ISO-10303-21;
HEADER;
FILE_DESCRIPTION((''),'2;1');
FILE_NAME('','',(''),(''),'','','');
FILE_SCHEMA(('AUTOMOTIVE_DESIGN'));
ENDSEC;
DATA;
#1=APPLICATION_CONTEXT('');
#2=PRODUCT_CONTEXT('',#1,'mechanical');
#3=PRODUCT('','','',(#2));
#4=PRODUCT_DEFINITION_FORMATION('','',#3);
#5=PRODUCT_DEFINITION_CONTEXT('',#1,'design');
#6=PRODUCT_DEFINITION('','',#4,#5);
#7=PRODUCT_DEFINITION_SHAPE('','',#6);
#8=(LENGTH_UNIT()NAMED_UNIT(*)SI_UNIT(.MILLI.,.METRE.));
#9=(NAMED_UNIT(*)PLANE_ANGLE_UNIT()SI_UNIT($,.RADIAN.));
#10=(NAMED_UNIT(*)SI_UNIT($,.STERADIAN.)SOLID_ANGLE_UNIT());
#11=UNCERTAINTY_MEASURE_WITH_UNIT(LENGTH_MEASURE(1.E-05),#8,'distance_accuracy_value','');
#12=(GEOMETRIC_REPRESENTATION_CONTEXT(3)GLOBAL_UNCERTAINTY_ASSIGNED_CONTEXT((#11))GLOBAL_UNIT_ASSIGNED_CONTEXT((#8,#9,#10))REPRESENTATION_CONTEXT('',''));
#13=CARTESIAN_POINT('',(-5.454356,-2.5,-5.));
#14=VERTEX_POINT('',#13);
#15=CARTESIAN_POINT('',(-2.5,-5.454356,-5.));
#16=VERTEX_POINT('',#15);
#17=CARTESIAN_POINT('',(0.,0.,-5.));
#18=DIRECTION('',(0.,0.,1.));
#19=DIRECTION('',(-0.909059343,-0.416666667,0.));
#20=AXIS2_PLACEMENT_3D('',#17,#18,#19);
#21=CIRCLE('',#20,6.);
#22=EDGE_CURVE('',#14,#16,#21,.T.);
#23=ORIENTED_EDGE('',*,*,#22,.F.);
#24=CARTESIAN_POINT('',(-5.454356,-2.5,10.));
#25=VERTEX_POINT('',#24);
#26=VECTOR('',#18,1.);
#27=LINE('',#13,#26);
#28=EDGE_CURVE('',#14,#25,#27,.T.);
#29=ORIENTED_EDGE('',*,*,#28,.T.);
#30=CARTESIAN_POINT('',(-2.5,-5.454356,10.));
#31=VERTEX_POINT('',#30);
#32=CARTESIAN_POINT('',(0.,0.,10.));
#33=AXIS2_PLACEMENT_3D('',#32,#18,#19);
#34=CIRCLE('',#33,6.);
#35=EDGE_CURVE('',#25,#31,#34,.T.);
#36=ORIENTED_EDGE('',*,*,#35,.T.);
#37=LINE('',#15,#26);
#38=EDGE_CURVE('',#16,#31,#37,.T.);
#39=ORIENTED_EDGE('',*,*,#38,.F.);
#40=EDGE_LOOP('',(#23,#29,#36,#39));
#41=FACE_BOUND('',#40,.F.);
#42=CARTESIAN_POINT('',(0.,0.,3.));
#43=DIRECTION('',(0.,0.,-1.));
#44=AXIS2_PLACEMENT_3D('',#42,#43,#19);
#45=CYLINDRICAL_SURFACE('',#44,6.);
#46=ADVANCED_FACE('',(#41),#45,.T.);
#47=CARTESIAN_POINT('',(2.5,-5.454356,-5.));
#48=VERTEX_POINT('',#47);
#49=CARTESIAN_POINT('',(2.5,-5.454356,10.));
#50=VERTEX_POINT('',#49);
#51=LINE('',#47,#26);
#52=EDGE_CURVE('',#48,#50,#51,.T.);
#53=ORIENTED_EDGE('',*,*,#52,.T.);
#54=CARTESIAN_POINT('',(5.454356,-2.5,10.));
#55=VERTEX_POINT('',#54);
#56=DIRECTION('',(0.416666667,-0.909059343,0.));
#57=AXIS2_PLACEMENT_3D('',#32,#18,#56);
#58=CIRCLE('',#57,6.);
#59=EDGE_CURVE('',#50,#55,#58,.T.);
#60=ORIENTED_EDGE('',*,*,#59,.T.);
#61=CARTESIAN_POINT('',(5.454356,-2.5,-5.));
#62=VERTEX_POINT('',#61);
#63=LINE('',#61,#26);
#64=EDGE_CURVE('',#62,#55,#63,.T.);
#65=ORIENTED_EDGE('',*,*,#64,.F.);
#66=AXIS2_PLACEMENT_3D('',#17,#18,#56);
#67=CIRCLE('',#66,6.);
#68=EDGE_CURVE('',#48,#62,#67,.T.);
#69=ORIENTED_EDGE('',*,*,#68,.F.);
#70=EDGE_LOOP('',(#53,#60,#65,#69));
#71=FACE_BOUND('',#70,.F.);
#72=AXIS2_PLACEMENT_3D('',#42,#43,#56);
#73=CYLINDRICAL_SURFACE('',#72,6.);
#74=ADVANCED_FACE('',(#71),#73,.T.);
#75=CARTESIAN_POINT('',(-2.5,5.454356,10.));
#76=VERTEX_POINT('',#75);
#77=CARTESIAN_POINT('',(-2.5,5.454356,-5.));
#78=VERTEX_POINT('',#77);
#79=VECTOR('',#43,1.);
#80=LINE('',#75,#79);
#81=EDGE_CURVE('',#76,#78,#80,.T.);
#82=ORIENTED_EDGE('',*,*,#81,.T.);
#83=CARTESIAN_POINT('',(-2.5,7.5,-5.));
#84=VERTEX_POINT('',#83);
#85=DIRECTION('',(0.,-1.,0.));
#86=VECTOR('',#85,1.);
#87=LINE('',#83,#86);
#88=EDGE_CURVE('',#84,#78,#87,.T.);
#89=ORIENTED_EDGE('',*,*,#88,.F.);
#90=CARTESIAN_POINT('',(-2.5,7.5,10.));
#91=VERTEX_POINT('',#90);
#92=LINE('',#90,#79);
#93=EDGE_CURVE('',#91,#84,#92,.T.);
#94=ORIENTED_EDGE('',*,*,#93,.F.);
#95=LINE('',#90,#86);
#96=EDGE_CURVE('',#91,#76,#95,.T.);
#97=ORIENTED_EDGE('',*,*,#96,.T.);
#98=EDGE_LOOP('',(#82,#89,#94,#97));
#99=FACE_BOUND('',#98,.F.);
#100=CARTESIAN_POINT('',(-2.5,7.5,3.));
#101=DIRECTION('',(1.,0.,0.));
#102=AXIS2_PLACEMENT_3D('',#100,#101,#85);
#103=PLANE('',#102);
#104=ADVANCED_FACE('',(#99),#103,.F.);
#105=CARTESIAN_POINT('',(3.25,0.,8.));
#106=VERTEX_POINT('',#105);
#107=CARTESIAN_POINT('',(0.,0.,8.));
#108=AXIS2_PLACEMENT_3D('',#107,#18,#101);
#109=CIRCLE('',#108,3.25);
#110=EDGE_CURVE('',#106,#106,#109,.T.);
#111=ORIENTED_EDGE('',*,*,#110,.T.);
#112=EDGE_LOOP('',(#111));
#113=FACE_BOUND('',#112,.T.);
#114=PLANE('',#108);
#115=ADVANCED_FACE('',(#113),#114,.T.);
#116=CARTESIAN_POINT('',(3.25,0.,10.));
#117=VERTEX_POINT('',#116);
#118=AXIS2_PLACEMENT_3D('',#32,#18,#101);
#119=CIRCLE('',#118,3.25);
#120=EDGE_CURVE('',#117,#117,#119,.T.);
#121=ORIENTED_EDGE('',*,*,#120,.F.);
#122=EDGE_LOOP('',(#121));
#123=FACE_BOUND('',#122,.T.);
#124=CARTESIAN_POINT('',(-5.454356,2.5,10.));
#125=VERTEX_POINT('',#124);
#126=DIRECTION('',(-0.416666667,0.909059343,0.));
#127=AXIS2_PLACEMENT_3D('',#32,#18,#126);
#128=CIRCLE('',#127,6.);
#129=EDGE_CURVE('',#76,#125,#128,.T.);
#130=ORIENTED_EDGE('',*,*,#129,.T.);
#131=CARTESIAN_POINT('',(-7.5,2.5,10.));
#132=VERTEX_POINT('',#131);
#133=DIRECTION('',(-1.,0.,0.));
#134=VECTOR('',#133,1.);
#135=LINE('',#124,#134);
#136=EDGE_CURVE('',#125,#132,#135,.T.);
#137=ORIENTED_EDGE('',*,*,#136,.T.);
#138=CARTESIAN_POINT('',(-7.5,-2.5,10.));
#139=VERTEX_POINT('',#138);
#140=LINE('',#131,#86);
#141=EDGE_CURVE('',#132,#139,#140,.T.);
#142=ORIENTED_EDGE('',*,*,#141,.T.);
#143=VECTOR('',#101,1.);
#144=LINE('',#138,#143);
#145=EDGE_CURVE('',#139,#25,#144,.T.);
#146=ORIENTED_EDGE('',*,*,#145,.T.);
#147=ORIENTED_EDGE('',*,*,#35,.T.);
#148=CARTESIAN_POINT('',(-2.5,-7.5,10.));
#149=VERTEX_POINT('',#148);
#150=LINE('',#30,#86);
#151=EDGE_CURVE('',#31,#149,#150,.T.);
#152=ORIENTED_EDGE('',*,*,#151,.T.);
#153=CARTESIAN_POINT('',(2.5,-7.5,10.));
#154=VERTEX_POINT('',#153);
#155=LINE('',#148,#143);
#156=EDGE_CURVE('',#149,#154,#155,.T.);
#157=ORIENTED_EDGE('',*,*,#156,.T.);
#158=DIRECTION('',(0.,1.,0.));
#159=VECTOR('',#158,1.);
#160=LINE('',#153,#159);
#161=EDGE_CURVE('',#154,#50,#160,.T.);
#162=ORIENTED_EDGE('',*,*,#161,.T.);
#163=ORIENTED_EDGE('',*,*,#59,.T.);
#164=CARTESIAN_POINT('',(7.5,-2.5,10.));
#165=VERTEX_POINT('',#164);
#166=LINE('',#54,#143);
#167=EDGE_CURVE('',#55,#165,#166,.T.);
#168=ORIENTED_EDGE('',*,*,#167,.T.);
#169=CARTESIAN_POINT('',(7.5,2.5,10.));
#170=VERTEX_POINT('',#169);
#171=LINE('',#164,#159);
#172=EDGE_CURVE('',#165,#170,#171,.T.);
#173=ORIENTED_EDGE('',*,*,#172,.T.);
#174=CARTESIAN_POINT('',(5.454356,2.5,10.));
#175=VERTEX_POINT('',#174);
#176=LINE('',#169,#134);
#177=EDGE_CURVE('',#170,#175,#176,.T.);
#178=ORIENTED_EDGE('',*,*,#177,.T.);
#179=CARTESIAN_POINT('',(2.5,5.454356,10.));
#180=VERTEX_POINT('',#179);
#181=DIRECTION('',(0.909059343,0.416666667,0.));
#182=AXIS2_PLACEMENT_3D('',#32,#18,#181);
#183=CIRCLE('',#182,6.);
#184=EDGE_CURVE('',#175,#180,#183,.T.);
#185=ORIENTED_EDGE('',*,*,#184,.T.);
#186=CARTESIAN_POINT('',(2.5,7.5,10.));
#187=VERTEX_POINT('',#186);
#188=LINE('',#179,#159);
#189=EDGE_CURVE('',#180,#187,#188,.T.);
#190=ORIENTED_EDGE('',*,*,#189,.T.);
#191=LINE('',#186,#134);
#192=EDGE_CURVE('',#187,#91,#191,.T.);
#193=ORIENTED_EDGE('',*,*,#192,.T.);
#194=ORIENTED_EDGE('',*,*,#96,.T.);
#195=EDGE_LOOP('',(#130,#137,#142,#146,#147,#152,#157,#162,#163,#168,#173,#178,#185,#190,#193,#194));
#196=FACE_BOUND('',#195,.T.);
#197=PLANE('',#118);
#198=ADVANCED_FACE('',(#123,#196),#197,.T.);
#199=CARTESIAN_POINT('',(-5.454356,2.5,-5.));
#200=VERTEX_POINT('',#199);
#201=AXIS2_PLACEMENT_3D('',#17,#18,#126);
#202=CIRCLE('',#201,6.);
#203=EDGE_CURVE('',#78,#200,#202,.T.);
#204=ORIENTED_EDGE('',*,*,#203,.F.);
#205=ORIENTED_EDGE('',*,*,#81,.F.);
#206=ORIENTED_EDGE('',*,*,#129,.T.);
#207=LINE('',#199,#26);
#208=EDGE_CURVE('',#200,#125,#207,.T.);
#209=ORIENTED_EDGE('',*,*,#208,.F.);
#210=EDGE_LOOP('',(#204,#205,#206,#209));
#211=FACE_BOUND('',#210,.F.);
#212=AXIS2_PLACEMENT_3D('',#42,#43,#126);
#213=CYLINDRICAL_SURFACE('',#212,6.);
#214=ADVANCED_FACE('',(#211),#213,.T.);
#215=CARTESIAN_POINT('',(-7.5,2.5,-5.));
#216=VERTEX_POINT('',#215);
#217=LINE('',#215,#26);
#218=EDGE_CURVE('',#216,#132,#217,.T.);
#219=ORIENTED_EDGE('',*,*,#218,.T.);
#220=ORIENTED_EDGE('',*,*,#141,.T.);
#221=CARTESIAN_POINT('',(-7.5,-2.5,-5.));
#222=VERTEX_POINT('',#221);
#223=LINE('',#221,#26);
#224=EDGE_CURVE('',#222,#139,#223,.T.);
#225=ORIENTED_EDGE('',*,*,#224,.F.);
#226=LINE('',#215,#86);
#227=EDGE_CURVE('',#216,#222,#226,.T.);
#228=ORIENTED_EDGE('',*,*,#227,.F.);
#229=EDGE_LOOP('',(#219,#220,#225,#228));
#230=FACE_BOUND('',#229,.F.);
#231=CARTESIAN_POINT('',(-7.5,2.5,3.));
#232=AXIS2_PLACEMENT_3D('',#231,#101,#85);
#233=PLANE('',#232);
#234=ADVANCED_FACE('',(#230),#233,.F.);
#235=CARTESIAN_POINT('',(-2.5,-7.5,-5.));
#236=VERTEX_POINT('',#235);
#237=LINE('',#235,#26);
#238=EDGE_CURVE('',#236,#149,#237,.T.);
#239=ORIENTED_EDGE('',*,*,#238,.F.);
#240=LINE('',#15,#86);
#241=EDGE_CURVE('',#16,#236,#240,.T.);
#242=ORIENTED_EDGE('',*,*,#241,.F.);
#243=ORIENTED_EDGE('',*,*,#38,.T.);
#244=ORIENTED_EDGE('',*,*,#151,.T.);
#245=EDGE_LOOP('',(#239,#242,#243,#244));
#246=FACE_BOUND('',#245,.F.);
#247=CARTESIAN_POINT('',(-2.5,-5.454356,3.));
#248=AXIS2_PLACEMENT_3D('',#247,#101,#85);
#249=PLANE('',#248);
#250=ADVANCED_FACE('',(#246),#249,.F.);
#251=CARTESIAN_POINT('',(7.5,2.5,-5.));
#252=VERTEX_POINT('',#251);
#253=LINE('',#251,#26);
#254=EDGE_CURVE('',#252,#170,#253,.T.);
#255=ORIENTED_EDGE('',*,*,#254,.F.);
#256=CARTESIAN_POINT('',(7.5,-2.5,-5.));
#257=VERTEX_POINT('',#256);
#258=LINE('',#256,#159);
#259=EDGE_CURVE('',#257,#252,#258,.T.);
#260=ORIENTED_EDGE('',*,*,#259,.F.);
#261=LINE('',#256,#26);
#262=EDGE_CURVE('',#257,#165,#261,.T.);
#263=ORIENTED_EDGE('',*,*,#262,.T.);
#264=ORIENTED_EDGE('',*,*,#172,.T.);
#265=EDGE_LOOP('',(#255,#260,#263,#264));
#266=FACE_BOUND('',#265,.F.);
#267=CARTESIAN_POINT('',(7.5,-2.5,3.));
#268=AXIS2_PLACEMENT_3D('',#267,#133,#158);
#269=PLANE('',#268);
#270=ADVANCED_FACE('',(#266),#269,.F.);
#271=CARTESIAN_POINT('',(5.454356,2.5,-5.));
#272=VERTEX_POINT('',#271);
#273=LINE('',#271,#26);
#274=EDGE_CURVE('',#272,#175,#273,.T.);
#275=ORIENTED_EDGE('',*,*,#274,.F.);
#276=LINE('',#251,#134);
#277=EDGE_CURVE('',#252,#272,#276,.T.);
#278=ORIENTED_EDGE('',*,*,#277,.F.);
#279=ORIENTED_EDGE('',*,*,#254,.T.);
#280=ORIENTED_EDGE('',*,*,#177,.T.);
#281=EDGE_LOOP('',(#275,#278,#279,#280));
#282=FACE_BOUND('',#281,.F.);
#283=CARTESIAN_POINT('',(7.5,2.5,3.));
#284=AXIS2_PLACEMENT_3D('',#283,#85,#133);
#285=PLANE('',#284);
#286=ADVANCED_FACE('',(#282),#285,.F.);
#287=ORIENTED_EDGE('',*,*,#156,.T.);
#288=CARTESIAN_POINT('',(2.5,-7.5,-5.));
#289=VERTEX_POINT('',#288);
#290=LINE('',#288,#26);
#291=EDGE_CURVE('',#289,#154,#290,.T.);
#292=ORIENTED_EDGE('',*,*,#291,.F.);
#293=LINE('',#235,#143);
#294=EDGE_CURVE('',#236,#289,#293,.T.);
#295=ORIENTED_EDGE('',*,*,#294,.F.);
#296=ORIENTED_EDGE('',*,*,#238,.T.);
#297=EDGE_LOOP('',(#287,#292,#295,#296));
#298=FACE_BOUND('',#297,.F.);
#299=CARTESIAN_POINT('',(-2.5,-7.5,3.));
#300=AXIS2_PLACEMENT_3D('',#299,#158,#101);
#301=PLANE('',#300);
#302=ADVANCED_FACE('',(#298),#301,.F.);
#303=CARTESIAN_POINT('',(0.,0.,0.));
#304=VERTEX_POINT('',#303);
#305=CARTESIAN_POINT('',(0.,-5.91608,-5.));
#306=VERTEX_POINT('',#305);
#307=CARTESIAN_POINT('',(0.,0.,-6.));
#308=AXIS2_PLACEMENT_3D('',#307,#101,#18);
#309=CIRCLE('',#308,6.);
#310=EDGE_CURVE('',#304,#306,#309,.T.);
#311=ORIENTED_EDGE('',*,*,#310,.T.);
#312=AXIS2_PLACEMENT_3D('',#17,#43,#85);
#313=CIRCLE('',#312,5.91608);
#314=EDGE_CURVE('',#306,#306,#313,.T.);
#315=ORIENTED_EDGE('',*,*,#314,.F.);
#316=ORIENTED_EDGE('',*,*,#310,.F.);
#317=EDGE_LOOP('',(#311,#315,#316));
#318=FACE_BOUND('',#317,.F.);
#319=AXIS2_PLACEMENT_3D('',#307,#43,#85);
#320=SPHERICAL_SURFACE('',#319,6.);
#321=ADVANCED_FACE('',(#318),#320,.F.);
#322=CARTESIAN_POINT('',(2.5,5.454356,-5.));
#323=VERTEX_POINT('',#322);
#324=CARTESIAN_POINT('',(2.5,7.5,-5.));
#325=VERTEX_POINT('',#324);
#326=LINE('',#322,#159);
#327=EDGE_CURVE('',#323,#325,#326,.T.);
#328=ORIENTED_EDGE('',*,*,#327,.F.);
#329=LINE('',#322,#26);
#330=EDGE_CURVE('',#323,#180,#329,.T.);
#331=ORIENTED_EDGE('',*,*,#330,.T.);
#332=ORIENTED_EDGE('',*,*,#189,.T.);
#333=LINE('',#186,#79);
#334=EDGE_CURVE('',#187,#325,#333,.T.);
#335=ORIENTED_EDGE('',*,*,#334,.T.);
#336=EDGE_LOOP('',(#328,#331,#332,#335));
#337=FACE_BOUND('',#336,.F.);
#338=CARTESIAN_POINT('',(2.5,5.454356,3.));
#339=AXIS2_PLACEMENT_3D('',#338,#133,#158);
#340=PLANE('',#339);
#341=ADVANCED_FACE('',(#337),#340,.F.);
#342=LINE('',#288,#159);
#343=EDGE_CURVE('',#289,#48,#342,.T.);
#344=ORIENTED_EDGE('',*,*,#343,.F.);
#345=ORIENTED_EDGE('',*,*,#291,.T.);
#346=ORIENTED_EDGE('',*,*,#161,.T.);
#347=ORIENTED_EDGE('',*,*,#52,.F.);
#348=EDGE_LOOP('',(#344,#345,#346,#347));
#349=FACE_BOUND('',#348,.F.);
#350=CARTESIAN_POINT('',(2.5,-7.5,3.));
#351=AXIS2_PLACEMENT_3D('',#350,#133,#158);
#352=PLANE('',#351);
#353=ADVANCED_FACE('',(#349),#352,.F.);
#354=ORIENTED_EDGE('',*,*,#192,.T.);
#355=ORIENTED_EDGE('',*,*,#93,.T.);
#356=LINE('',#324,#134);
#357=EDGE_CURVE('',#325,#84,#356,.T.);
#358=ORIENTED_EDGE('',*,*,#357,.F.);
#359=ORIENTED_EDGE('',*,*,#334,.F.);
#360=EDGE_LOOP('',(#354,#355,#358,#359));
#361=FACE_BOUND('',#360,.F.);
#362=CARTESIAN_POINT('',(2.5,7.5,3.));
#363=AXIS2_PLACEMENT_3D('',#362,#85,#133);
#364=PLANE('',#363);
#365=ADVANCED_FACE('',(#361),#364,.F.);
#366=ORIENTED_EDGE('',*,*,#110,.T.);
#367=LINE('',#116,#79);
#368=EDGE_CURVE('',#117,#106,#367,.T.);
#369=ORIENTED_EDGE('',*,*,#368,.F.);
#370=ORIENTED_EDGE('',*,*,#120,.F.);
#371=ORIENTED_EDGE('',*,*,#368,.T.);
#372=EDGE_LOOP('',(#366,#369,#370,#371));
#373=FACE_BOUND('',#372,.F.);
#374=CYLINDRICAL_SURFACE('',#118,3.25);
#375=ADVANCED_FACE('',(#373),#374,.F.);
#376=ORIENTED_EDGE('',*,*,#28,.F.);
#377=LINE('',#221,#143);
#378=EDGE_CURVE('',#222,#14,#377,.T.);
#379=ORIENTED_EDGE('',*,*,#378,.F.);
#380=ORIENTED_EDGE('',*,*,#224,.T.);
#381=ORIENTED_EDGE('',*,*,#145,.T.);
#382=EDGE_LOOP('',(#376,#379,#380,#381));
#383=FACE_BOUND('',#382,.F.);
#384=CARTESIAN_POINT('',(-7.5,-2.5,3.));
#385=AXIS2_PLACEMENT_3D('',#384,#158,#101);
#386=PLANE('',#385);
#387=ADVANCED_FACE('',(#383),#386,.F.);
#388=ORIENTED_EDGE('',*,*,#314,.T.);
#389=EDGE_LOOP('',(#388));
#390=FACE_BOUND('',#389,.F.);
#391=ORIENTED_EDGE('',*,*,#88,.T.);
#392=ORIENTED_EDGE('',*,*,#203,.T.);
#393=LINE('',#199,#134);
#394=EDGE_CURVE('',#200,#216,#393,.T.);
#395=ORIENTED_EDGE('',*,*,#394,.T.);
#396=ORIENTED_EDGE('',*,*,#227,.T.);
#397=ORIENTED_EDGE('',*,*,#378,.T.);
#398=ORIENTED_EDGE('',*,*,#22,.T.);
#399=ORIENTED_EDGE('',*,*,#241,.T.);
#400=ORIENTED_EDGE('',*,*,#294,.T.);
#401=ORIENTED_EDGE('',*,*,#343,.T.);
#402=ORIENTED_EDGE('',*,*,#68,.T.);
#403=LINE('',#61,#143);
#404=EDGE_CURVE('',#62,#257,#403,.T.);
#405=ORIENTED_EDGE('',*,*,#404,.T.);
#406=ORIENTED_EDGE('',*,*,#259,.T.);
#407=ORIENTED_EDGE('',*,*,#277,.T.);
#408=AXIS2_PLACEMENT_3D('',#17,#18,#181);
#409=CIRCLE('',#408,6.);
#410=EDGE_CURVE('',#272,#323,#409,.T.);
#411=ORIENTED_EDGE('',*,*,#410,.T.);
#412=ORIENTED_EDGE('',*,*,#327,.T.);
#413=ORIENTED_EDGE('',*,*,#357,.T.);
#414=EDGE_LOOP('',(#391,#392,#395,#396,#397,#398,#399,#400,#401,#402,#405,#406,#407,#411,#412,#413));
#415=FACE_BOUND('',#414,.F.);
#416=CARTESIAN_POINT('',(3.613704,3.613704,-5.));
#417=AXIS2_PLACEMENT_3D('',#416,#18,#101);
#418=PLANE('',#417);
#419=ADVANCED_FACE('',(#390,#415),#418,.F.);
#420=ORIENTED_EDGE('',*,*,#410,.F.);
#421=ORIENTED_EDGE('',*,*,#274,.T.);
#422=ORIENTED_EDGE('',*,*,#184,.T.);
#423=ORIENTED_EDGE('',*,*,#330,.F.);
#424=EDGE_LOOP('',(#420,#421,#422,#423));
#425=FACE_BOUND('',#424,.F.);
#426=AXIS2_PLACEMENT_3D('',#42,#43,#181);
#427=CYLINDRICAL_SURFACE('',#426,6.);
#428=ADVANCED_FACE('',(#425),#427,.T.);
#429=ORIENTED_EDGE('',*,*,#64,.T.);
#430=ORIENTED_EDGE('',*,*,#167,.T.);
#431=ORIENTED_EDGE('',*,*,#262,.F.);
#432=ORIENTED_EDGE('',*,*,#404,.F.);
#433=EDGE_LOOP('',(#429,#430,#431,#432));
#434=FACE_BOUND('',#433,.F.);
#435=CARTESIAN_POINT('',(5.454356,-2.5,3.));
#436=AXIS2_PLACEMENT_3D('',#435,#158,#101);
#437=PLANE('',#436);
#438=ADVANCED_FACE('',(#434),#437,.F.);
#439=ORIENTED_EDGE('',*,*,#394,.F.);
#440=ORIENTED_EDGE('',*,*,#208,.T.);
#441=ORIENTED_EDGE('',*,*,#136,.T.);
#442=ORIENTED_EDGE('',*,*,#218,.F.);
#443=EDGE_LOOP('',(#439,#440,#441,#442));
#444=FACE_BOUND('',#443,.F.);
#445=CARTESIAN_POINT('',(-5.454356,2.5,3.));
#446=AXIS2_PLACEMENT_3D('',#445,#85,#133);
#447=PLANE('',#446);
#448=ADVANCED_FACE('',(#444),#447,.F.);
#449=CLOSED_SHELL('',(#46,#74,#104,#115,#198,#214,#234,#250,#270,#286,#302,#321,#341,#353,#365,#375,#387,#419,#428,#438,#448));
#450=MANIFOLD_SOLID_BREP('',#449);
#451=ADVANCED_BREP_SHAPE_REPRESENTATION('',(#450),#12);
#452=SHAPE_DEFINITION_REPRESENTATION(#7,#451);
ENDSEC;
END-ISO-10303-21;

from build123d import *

# Parameters (mm, degrees)
F0_W     = 5
F0_H     = 5
F1_DEPTH = 3
F5_DEPTH = 5
F7_DEPTH = 7
F8_R     = 3.25
F9_DEPTH = 2


with BuildPart() as f1:
    # F0 (on Top) → F1 (new body)
    with BuildSketch(Plane.XY):
        with BuildLine():
            Line((2.5, 2.5), (5.4543560573, 2.5))
            ThreePointArc((5.4543560573, 2.5), (4.2426406871, 4.2426406871), (2.5, 5.4543560573))
            Line((2.5, 5.4543560573), (2.5, 2.5))
        make_face()
        with BuildLine():
            Line((2.5, -7.5), (2.5, -5.4543560573))
            ThreePointArc((2.5, -5.4543560573), (0, -6), (-2.5, -5.4543560573))
            Line((-2.5, -5.4543560573), (-2.5, -7.5))
            Line((-2.5, -7.5), (2.5, -7.5))
        make_face()
        with BuildLine():
            ThreePointArc((-5.4543560573, -2.5), (-4.2426406871, -4.2426406871), (-2.5, -5.4543560573))
            Line((-2.5, -5.4543560573), (-2.5, -2.5))
            Line((-2.5, -2.5), (-5.4543560573, -2.5))
        make_face()
        with BuildLine():
            ThreePointArc((-5.4543560573, -2.5), (-6, 0), (-5.4543560573, 2.5))
            Line((-5.4543560573, 2.5), (-7.5, 2.5))
            Line((-7.5, 2.5), (-7.5, -2.5))
            Line((-7.5, -2.5), (-5.4543560573, -2.5))
        make_face()
        with BuildLine():
            ThreePointArc((2.5, -5.4543560573), (4.2426406871, -4.2426406871), (5.4543560573, -2.5))
            Line((5.4543560573, -2.5), (2.5, -2.5))
            Line((2.5, -2.5), (2.5, -5.4543560573))
        make_face()
        with BuildLine():
            Line((-2.5, 2.5), (-2.5, 5.4543560573))
            ThreePointArc((-2.5, 5.4543560573), (-4.2426406871, 4.2426406871), (-5.4543560573, 2.5))
            Line((-5.4543560573, 2.5), (-2.5, 2.5))
        make_face()
        with BuildLine():
            ThreePointArc((5.4543560573, -2.5), (5.8620020617, -1.2794263668), (6, 0))
            ThreePointArc((6, 0), (5.8620020617, 1.2794263668), (5.4543560573, 2.5))
            Line((5.4543560573, 2.5), (2.5, 2.5))
            Line((2.5, 2.5), (2.5, -2.5))
            Line((2.5, -2.5), (5.4543560573, -2.5))
        make_face()
        Rectangle(F0_W, F0_H)
        with BuildLine():
            Line((-2.5, -2.5), (-2.5, 2.5))
            Line((-2.5, 2.5), (-5.4543560573, 2.5))
            ThreePointArc((-5.4543560573, 2.5), (-6, 0), (-5.4543560573, -2.5))
            Line((-5.4543560573, -2.5), (-2.5, -2.5))
        make_face()
        with BuildLine():
            Line((2.5, 2.5), (2.5, 5.4543560573))
            ThreePointArc((2.5, 5.4543560573), (0, 6), (-2.5, 5.4543560573))
            Line((-2.5, 5.4543560573), (-2.5, 2.5))
            Line((-2.5, 2.5), (2.5, 2.5))
        make_face()
        with BuildLine():
            ThreePointArc((-2.5, 5.4543560573), (0, 6), (2.5, 5.4543560573))
            Line((2.5, 5.4543560573), (2.5, 7.5))
            Line((2.5, 7.5), (-2.5, 7.5))
            Line((-2.5, 7.5), (-2.5, 5.4543560573))
        make_face()
        with BuildLine():
            ThreePointArc((5.4543560573, 2.5), (5.8620020617, 1.2794263668), (6, 0))
            ThreePointArc((6, 0), (5.8620020617, -1.2794263668), (5.4543560573, -2.5))
            Line((5.4543560573, -2.5), (7.5, -2.5))
            Line((7.5, -2.5), (7.5, 2.5))
            Line((7.5, 2.5), (5.4543560573, 2.5))
        make_face()
        with BuildLine():
            ThreePointArc((-2.5, -5.4543560573), (0, -6), (2.5, -5.4543560573))
            Line((2.5, -5.4543560573), (2.5, -2.5))
            Line((2.5, -2.5), (-2.5, -2.5))
            Line((-2.5, -2.5), (-2.5, -5.4543560573))
        make_face()
    extrude(amount=F1_DEPTH)

    # F5 (add): a face of the model
    f5_faces = [f1.faces().sort_by_distance(p)[0] for p in [
        (0, 0, 0),
    ]]
    extrude(f5_faces, amount=F5_DEPTH)


with BuildPart() as f4:
    # F3 (on Right) → F4 (revolve)
    with BuildSketch(Plane.YZ):
        with BuildLine():
            Line((0, -12), (0, 0))
            ThreePointArc((0, 0), (-6, -6), (0, -12))
        make_face()
    revolve(axis=Axis((0, 0, -6), (0, 0, -1)))


with BuildPart() as f1_1:
    add(f1.part)

    # F6: cut F4
    add(f4.part, mode=Mode.SUBTRACT)

    # F2 (on face) → F7 (join)
    with BuildSketch(Plane.XY.offset(3)):
        with BuildLine():
            ThreePointArc((-2.5, 5.4543560573), (-4.2426406871, 4.2426406871), (-5.4543560573, 2.5))
            Line((-5.4543560573, 2.5), (-7.5, 2.5))
            Line((-7.5, 2.5), (-7.5, -2.5))
            Line((-7.5, -2.5), (-5.4543560573, -2.5))
            ThreePointArc((-5.4543560573, -2.5), (-4.2426406871, -4.2426406871), (-2.5, -5.4543560573))
            Line((-2.5, -5.4543560573), (-2.5, -7.5))
            Line((-2.5, -7.5), (2.5, -7.5))
            Line((2.5, -7.5), (2.5, -5.4543560573))
            ThreePointArc((2.5, -5.4543560573), (4.2426406871, -4.2426406871), (5.4543560573, -2.5))
            Line((5.4543560573, -2.5), (7.5, -2.5))
            Line((7.5, -2.5), (7.5, 2.5))
            Line((7.5, 2.5), (5.4543560573, 2.5))
            ThreePointArc((5.4543560573, 2.5), (4.2426406871, 4.2426406871), (2.5, 5.4543560573))
            Line((2.5, 5.4543560573), (2.5, 7.5))
            Line((2.5, 7.5), (-2.5, 7.5))
            Line((-2.5, 7.5), (-2.5, 5.4543560573))
        make_face()
    extrude(amount=F7_DEPTH)

    # F8 (on face) → F9 (cut)
    with BuildSketch(Plane.XY.offset(10)):
        Circle(F8_R)
    extrude(amount=-F9_DEPTH, mode=Mode.SUBTRACT)


solid = f1_1.part
